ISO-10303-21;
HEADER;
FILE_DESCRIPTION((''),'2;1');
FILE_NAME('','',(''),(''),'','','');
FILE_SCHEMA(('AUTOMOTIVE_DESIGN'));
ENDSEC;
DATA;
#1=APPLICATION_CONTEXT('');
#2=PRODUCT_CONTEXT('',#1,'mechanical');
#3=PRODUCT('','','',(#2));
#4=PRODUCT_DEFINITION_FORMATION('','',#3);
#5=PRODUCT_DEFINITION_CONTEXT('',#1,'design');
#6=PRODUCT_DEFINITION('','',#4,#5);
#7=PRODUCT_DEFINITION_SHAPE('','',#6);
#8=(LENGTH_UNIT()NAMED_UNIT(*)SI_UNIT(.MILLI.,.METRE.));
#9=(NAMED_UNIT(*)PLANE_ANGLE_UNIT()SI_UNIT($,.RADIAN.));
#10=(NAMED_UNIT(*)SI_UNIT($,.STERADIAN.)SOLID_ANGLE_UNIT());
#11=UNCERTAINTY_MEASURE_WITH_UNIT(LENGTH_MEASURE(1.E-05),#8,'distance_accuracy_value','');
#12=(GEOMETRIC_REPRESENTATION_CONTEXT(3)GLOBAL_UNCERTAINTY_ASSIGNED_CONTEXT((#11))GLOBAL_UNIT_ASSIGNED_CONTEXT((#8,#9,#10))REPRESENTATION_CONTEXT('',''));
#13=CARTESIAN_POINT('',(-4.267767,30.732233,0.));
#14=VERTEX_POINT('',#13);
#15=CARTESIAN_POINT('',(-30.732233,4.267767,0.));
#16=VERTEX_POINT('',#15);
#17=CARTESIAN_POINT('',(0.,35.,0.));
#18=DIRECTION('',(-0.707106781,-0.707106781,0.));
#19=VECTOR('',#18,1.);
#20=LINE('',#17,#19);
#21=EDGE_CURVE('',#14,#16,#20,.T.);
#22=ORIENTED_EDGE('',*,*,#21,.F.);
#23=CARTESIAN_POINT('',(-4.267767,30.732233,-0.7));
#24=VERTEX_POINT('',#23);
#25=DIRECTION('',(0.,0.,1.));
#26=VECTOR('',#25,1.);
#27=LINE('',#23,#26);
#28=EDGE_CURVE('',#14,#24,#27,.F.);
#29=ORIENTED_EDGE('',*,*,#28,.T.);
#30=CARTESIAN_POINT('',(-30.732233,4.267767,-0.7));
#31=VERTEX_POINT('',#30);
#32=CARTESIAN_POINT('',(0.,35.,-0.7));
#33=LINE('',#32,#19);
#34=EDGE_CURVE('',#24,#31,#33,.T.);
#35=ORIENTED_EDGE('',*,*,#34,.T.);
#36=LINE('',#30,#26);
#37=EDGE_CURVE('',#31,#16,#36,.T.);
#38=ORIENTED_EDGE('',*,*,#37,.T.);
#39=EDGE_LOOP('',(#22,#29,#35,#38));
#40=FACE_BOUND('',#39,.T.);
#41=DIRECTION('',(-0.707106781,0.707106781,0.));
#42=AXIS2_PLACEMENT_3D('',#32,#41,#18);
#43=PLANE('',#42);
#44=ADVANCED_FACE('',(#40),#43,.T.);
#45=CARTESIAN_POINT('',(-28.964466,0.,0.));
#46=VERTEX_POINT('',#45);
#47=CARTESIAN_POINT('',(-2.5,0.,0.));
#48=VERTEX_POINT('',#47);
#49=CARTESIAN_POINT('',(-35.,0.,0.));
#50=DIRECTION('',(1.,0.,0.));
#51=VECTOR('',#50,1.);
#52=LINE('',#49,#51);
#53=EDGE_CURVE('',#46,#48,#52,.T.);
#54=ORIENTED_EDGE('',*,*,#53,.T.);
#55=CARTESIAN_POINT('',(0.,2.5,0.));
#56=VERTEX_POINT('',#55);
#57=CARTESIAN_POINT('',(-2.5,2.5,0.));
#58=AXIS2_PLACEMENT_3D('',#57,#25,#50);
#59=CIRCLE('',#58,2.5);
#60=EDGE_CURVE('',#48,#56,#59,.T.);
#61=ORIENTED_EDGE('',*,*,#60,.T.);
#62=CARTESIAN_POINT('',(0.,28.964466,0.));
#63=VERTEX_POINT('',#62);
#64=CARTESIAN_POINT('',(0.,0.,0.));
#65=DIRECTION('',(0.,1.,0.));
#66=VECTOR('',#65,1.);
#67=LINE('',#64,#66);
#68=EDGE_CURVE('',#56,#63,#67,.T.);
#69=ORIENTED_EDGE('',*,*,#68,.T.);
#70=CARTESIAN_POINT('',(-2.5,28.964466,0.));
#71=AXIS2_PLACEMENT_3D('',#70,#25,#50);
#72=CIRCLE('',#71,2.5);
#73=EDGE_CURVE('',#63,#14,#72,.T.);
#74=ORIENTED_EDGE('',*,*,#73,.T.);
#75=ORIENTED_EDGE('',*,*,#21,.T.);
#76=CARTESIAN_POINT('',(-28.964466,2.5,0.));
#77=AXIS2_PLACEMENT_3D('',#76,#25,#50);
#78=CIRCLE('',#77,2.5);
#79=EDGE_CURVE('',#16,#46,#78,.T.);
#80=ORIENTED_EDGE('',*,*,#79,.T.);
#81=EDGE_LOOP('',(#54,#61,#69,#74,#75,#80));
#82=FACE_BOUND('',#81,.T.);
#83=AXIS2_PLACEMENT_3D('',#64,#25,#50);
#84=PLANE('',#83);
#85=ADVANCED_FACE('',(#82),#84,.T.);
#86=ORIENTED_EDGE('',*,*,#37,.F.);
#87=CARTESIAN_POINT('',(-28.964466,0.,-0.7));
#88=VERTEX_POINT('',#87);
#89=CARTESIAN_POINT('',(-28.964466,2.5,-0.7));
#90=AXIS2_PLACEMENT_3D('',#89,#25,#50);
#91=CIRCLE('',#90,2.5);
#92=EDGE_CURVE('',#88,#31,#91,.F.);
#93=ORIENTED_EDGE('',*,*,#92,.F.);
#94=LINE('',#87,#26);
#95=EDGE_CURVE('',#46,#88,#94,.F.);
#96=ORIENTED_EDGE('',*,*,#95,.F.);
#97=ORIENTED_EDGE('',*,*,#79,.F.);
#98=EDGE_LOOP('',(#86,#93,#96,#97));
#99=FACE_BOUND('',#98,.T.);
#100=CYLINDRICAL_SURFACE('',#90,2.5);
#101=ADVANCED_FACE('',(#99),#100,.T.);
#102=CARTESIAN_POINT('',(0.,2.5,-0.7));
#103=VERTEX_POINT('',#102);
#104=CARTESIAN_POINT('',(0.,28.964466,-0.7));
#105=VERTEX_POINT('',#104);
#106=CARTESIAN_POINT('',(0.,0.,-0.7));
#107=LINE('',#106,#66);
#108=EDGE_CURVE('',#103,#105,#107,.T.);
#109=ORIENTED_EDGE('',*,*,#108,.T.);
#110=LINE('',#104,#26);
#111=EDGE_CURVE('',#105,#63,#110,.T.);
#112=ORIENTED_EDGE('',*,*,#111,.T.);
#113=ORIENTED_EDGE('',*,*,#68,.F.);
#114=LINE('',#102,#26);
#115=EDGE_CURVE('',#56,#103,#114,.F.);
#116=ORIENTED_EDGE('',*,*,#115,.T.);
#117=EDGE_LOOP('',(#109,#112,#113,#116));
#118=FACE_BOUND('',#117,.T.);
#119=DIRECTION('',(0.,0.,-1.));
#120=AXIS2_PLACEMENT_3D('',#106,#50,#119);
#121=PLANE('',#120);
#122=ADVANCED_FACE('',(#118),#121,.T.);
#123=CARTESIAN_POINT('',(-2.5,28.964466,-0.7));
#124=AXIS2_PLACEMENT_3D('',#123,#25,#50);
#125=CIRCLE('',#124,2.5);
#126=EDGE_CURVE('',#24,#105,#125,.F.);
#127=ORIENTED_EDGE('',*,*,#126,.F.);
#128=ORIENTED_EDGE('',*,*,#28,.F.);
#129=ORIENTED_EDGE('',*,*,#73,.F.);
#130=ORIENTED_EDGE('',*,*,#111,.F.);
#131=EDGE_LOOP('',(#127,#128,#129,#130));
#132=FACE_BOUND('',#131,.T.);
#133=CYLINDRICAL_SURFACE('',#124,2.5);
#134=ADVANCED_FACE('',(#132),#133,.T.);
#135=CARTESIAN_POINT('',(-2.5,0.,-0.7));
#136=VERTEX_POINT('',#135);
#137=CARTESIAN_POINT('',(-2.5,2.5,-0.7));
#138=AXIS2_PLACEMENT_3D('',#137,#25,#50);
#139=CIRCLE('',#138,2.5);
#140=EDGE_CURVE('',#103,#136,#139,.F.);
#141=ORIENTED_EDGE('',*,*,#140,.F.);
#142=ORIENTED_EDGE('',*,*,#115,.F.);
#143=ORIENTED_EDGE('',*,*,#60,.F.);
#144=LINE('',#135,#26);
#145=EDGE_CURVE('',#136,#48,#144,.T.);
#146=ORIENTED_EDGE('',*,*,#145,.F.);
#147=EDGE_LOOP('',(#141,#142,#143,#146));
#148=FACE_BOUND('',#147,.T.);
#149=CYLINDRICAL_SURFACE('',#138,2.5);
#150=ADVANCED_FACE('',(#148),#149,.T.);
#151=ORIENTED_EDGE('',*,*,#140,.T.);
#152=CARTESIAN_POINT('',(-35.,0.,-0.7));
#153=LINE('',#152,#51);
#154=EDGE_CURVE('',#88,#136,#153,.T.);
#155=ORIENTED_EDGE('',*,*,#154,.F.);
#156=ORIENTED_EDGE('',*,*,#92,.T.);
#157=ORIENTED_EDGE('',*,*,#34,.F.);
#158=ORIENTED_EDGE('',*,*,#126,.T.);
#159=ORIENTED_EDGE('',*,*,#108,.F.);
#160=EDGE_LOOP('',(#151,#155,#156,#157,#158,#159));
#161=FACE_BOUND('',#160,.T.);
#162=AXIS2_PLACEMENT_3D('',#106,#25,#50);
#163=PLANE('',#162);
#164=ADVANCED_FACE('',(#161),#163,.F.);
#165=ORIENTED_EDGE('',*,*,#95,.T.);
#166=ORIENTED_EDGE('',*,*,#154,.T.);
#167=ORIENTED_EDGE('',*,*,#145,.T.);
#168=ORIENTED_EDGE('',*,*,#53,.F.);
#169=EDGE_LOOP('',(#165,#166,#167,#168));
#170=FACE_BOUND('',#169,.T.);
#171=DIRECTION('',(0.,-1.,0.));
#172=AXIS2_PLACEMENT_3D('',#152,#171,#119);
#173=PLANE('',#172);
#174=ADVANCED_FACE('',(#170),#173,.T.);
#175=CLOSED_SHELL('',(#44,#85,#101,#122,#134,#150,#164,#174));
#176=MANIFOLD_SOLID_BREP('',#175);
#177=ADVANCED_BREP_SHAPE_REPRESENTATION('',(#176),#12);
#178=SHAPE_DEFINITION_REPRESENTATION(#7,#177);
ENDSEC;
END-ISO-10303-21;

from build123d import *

# Parameters (mm, degrees)
BASE_FLANGE1_DEPTH  = 0.7
BREAK_CORNER1_START = -0.7
BREAK_CORNER1_DEPTH = 0.7


# Read off the part's stored shape, not the designer's step: Break-Corner1
# Sheet-metal steps are written as plain solids
with BuildPart() as part:
    # Sketch1 → Base-Flange1 (new body)
    with BuildSketch(Plane.XY):
        Polygon((0, 0), (0, 35), (-35, 0), align=None)
    extrude(amount=-BASE_FLANGE1_DEPTH)

    # Break-Corner1 outline → Break-Corner1 (cut)
    with BuildSketch(Plane.XY.offset(BREAK_CORNER1_START)):
        with BuildLine():
            ThreePointArc((-28.964466094, 0), (-31.274164925, 1.543291419), (-30.732233047, 4.267766953))
            Line((-30.732233047, 4.267766953), (-35, 0))
            Line((-35, 0), (-28.964466094, 0))
        make_face()
        with BuildLine():
            Line((0, 35), (-4.267766953, 30.732233047))
            ThreePointArc((-4.267766953, 30.732233047), (-1.543291419, 31.274164925), (0, 28.964466094))
            Line((0, 28.964466094), (0, 35))
        make_face()
        with BuildLine():
            ThreePointArc((0, 2.5), (-0.732233047, 0.732233047), (-2.5, 0))
            Line((-2.5, 0), (0, 0))
            Line((0, 0), (0, 2.5))
        make_face()
    extrude(amount=BREAK_CORNER1_DEPTH, mode=Mode.SUBTRACT)


solid = part.part
